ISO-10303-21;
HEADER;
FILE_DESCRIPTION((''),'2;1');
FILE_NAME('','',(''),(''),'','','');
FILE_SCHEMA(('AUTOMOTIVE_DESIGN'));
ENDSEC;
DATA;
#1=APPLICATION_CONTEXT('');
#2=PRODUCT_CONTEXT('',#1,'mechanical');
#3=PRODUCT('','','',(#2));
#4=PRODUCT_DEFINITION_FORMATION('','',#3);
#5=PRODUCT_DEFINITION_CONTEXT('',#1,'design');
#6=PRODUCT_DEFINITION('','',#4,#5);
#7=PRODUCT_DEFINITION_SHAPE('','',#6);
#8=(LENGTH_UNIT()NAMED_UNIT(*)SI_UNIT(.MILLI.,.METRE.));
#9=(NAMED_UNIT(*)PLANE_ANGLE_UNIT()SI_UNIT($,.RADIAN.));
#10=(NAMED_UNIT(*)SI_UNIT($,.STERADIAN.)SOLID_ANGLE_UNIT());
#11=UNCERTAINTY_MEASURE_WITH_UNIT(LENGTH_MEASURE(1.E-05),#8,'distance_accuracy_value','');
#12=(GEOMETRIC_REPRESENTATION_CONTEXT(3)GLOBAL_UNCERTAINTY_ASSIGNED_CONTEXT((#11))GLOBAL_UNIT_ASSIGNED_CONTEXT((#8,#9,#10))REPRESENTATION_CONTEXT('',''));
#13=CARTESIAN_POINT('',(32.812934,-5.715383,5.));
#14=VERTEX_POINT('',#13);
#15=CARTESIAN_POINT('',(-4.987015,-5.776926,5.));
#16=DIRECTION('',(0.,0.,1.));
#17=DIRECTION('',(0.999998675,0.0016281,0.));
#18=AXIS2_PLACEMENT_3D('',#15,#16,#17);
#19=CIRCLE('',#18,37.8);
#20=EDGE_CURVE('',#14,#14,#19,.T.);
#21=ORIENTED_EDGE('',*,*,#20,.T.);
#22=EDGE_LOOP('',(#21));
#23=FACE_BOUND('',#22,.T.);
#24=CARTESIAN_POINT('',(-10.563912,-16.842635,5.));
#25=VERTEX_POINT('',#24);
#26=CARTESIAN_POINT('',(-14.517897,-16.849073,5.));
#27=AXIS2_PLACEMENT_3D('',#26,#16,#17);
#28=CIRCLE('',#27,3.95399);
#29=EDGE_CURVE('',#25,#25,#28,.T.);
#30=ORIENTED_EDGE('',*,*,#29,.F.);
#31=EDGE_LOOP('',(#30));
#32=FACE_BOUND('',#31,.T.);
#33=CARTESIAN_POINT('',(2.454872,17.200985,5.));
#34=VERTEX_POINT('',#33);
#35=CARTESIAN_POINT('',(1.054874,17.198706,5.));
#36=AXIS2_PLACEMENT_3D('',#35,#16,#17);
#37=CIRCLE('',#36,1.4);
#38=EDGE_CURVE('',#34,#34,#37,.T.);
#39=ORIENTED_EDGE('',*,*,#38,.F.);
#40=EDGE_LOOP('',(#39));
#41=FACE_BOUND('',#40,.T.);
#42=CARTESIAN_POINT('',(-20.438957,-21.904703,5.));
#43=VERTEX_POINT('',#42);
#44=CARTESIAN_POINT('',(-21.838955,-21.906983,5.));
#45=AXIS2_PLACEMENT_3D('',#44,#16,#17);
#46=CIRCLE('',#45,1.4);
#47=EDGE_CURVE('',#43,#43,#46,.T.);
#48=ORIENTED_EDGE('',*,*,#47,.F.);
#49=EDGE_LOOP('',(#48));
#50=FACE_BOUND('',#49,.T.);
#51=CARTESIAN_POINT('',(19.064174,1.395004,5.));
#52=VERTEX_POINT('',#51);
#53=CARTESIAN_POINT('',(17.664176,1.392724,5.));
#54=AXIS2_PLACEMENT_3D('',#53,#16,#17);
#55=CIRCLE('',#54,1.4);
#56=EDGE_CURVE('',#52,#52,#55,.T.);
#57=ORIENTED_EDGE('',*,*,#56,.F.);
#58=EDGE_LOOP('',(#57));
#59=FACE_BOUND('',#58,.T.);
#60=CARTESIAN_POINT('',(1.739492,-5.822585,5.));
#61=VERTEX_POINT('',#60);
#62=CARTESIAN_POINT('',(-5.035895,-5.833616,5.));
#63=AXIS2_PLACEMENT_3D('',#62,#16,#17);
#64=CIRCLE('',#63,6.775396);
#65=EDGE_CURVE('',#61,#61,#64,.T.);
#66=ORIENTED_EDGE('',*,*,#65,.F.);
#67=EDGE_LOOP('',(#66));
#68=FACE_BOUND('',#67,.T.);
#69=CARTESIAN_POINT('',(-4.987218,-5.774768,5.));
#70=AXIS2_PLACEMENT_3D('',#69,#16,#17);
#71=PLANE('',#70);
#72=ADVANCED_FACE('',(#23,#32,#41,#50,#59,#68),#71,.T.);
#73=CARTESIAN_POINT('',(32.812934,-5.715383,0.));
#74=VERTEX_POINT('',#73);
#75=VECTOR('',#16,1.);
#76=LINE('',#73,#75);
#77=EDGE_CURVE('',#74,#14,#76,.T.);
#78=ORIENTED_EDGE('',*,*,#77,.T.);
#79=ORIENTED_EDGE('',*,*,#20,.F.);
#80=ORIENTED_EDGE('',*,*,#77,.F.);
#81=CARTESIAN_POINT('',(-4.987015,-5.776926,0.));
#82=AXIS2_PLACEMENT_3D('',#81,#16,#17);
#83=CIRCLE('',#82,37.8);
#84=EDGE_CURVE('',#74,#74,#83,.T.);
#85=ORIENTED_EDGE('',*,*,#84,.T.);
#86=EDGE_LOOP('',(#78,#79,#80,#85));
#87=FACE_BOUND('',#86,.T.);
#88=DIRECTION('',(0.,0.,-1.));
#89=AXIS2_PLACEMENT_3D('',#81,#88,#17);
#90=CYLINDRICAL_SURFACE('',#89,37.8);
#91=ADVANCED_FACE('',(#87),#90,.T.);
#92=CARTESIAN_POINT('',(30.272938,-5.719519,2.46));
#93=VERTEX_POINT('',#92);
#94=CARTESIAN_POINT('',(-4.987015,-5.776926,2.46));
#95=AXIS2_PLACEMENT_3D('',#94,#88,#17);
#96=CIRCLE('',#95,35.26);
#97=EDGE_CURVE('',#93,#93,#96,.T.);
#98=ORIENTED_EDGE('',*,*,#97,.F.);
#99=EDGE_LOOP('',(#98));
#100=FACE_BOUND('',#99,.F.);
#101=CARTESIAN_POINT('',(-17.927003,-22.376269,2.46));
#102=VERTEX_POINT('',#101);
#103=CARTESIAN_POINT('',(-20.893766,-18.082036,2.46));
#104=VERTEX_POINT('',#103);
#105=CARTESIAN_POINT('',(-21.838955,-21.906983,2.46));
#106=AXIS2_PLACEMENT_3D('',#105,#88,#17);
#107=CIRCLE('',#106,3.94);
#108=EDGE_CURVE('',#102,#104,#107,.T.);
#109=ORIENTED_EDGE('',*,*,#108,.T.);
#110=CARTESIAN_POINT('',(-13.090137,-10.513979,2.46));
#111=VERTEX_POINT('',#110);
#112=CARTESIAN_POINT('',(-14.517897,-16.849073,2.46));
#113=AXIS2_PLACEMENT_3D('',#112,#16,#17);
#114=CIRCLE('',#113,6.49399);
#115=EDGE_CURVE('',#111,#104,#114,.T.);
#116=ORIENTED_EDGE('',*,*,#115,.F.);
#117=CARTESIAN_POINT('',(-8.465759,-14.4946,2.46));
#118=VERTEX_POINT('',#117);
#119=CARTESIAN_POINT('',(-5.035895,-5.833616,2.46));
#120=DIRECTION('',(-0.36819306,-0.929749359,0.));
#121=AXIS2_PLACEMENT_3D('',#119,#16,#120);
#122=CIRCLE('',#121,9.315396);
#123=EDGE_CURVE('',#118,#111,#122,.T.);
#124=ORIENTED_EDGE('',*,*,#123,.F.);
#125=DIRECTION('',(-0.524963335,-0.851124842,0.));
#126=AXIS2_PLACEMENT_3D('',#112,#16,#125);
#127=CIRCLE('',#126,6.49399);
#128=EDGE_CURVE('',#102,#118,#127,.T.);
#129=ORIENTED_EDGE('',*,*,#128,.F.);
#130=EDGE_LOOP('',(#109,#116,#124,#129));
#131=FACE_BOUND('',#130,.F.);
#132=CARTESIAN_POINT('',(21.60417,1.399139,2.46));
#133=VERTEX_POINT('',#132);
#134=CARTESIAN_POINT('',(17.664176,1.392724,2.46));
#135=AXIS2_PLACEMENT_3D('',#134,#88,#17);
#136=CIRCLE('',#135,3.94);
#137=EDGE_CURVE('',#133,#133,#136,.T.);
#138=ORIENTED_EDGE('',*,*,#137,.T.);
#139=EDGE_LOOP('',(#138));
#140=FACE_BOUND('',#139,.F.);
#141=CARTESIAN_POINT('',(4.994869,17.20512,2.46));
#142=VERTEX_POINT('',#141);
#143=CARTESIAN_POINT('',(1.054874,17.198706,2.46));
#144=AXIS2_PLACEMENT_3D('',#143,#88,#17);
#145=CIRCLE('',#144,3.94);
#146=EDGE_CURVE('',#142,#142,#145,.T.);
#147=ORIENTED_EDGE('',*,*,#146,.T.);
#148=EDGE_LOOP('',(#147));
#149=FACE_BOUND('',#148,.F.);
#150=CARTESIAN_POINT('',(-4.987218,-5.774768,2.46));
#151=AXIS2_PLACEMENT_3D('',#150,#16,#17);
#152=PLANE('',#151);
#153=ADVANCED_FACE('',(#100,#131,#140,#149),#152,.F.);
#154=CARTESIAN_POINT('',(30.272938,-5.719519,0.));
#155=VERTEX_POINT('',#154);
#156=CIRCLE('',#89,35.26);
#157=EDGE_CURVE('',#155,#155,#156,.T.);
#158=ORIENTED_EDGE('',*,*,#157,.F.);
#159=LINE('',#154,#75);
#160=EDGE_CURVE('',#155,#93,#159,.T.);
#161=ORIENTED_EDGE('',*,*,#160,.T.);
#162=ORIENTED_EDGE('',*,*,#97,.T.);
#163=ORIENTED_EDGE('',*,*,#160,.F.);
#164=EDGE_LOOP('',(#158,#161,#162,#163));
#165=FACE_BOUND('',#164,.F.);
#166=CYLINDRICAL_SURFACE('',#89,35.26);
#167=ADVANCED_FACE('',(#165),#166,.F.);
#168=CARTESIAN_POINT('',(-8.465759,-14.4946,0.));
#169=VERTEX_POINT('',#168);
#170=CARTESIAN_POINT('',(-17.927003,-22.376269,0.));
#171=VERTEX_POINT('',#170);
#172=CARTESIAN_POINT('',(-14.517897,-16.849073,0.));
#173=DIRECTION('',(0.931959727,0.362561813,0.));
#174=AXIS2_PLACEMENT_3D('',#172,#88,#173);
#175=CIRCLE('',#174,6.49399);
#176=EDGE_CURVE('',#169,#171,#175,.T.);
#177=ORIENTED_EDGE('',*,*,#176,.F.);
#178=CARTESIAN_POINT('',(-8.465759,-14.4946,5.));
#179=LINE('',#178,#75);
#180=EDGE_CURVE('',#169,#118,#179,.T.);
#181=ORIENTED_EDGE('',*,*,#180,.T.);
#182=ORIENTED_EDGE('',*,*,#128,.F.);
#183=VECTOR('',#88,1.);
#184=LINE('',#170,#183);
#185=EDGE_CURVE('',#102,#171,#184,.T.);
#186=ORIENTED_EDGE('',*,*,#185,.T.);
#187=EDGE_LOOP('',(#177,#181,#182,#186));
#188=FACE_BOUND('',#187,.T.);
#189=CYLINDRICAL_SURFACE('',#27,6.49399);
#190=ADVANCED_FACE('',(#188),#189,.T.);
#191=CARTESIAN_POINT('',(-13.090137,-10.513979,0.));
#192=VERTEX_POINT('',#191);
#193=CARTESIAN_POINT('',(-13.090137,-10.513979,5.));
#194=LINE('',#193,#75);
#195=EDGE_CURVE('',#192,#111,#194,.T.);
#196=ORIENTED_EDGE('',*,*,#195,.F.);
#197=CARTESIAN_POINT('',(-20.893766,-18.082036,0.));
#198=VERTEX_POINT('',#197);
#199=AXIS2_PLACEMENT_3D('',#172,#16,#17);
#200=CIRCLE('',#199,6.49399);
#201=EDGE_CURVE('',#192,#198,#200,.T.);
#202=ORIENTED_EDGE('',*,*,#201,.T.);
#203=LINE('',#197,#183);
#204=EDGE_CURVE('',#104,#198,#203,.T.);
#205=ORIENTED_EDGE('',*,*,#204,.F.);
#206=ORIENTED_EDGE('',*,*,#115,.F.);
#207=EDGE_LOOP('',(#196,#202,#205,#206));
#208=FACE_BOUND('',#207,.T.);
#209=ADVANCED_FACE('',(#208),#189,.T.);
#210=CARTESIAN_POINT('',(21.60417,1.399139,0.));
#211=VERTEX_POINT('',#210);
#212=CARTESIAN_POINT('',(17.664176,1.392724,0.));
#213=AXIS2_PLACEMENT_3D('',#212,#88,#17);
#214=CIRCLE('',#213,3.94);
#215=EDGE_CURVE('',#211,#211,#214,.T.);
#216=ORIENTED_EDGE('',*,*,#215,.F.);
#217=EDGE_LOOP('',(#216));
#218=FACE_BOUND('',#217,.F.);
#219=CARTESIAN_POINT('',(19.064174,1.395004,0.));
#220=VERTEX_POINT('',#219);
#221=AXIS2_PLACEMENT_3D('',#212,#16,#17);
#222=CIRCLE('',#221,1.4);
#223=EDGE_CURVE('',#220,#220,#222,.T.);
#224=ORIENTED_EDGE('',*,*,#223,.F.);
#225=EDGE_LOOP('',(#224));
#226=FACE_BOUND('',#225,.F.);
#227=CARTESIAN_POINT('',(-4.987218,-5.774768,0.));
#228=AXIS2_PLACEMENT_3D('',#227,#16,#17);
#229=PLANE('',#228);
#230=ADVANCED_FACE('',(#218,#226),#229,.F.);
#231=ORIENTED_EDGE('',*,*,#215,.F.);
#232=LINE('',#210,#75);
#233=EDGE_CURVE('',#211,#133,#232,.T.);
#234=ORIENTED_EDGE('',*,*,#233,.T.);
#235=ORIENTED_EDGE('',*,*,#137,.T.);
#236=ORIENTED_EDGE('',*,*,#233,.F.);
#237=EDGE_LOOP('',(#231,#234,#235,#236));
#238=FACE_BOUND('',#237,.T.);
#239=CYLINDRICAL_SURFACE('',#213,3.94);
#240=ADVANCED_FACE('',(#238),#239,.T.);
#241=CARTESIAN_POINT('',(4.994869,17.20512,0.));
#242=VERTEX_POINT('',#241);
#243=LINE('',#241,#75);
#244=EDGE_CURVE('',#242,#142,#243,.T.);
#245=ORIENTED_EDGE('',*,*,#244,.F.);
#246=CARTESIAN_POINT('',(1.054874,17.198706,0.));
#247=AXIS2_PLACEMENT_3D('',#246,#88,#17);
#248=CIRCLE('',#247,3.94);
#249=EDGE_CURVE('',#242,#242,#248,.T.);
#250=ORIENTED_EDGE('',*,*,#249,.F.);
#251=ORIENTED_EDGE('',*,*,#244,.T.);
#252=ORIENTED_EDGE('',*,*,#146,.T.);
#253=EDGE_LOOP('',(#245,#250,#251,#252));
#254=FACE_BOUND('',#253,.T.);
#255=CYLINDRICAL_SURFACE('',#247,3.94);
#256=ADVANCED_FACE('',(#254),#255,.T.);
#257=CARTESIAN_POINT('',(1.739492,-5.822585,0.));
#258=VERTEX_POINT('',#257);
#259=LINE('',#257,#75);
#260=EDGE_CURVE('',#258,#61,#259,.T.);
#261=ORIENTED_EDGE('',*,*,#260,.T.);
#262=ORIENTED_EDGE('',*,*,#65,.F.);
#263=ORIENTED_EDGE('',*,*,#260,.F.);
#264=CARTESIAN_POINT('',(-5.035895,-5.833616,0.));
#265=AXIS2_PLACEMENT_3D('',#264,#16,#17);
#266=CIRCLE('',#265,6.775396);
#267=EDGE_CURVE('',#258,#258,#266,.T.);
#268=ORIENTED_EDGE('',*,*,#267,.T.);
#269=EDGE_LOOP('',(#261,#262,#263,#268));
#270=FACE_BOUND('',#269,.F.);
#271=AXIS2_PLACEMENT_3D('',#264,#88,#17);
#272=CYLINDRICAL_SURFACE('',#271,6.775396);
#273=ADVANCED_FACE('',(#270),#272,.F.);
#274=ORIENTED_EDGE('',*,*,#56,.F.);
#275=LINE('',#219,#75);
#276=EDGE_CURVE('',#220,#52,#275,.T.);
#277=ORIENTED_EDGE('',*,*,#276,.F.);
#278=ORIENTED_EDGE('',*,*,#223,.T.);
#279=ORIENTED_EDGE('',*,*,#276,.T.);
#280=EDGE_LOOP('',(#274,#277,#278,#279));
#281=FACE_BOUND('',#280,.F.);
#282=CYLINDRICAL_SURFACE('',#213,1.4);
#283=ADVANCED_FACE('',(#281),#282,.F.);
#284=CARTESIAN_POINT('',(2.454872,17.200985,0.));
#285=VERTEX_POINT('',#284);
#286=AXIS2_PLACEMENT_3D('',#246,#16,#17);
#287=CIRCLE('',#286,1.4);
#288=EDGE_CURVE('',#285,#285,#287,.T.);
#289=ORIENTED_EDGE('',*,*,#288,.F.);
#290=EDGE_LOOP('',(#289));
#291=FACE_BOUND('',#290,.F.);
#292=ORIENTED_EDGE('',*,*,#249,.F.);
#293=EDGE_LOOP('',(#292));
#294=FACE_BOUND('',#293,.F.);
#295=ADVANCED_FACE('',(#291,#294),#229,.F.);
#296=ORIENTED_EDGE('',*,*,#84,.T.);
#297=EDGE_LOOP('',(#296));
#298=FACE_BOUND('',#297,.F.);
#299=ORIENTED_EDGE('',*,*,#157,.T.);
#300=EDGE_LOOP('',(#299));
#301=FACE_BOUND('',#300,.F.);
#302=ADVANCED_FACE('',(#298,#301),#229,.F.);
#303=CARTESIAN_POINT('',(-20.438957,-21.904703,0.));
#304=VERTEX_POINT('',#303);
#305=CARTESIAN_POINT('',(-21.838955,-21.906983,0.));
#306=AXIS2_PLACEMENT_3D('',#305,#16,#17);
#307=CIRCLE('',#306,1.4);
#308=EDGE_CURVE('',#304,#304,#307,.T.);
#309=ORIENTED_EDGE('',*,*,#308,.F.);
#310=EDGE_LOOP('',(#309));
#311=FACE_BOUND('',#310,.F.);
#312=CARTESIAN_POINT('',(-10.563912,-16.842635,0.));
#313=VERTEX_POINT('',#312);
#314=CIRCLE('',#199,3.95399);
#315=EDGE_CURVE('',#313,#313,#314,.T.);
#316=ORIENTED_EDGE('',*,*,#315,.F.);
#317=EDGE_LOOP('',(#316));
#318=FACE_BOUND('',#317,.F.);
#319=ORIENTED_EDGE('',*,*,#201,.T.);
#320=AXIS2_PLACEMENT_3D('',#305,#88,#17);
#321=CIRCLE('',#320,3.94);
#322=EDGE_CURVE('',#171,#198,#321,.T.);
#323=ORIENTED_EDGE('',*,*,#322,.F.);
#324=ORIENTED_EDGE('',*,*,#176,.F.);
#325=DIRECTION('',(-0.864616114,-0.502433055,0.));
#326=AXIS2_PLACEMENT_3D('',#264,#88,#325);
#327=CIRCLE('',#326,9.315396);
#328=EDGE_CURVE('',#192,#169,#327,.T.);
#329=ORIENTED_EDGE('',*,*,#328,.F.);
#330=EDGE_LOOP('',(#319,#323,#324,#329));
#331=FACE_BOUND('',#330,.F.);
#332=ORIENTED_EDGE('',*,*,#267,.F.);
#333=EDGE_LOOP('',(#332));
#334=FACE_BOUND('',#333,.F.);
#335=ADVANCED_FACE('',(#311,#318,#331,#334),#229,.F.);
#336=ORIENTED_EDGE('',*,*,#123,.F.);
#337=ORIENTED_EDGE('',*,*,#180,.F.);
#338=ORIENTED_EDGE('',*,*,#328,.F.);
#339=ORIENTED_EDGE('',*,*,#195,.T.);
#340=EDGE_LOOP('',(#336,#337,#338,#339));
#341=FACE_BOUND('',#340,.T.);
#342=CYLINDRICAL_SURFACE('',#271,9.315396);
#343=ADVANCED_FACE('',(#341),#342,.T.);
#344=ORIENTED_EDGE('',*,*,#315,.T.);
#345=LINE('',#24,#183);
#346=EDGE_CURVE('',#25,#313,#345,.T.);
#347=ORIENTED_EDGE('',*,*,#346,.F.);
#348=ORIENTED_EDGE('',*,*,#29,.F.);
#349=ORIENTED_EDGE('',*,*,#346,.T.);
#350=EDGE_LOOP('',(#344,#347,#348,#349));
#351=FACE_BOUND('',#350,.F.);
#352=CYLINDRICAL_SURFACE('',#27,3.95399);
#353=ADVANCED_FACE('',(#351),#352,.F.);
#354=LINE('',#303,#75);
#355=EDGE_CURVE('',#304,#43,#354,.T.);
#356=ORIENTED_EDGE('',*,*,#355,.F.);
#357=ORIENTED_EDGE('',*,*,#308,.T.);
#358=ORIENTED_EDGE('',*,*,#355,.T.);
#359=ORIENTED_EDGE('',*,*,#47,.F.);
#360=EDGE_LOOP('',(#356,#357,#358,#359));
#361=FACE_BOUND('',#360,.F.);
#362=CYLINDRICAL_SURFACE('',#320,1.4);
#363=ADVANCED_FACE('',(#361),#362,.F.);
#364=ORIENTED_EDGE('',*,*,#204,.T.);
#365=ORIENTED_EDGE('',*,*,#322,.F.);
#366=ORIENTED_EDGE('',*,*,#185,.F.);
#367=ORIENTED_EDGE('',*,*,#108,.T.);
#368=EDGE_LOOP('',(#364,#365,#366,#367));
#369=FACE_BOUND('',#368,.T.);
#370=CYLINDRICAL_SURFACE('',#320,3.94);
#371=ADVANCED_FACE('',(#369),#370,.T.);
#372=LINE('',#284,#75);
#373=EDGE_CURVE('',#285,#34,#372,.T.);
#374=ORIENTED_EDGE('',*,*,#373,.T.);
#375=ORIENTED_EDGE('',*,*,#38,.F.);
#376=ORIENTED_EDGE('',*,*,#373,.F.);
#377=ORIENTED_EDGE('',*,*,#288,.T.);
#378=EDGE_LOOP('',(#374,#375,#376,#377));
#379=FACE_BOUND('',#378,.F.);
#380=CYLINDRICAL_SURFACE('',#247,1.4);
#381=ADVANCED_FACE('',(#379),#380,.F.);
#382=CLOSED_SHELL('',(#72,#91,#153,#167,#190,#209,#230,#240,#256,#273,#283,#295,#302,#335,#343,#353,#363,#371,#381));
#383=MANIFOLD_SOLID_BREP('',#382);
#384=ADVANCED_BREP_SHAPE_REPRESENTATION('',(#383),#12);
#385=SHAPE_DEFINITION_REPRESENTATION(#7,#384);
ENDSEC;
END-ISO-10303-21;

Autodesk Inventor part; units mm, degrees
ref_plane "YZ Plane" through (0, 0, 0) normal (1, 0, 0) x (0, 1, 0)
ref_plane "XZ Plane" through (0, 0, 0) normal (0, 1, 0) x (-1, 0, 0)
ref_plane "XY Plane" through (0, 0, 0) normal (0, 0, 1) x (1, 0, 0)
ref_plane "Work Plane1" through (-4.987218, -5.774768, 0) normal (0, 0, 1) x (0.9999987, 0.0016281, 0)
sketch "Sketch1" plane through (-4.987218, -5.774768, 0) normal (0, 0, 1) x (0.9999987, 0.0016281, 0)
  circle A0 centre (0.000199, -0.002158) radius 38.1
  circle A1 centre (0.000199, -0.002158) radius 37.8
  circle A2 centre (-0.048773, -0.058769) radius 6.775396
  circle A3 centre (6.079487, 22.963606) radius 1.4
  circle A4 centre (-16.87798, -16.104757) radius 1.4
  circle A5 centre (22.663033, 7.130604) radius 1.4
  point P0 (4.996614, 5.76664)
  dimension "d0" = 0.3
sketch "Sketch1 outline for Extrusion1" plane through (-4.987218, -5.774768, 0) normal (0, 0, 1) x (0.9999987, 0.0016281, 0)
  circle A0 centre (0.000199, -0.002158) radius 37.8
  circle A1 centre (-16.87798, -16.104757) radius 1.4
  circle A2 centre (-0.048773, -0.058769) radius 6.775396
  circle A3 centre (22.663033, 7.130604) radius 1.4
  circle A4 centre (6.079487, 22.963606) radius 1.4
extrude "Extrusion1" add sketch "Sketch1 outline for Extrusion1" along normal blind 5
sketch "Sketch4" plane through (-4.987218, -5.774768, 5) normal (0, 0, 1) x (0.9999987, 0.0016281, 0)
  circle A0 centre (19.372358, 5.196915) radius 1.4
  circle A1 centre (-9.548696, -11.058773) radius 1.352011
  circle A2 centre (-9.548696, -11.058773) radius 3.95399
  point P0 (4.996614, 5.76664)
extrude "Extrusion4" cut sketch "Sketch4" against normal blind 25.4 contours A1 | A2
shell "Shell1" thickness 2.54 removed faces 1 at (15.854163, -10.364044, 0)
properties part number "Anglerfish_3inch_tube_adapterplate_focus"
